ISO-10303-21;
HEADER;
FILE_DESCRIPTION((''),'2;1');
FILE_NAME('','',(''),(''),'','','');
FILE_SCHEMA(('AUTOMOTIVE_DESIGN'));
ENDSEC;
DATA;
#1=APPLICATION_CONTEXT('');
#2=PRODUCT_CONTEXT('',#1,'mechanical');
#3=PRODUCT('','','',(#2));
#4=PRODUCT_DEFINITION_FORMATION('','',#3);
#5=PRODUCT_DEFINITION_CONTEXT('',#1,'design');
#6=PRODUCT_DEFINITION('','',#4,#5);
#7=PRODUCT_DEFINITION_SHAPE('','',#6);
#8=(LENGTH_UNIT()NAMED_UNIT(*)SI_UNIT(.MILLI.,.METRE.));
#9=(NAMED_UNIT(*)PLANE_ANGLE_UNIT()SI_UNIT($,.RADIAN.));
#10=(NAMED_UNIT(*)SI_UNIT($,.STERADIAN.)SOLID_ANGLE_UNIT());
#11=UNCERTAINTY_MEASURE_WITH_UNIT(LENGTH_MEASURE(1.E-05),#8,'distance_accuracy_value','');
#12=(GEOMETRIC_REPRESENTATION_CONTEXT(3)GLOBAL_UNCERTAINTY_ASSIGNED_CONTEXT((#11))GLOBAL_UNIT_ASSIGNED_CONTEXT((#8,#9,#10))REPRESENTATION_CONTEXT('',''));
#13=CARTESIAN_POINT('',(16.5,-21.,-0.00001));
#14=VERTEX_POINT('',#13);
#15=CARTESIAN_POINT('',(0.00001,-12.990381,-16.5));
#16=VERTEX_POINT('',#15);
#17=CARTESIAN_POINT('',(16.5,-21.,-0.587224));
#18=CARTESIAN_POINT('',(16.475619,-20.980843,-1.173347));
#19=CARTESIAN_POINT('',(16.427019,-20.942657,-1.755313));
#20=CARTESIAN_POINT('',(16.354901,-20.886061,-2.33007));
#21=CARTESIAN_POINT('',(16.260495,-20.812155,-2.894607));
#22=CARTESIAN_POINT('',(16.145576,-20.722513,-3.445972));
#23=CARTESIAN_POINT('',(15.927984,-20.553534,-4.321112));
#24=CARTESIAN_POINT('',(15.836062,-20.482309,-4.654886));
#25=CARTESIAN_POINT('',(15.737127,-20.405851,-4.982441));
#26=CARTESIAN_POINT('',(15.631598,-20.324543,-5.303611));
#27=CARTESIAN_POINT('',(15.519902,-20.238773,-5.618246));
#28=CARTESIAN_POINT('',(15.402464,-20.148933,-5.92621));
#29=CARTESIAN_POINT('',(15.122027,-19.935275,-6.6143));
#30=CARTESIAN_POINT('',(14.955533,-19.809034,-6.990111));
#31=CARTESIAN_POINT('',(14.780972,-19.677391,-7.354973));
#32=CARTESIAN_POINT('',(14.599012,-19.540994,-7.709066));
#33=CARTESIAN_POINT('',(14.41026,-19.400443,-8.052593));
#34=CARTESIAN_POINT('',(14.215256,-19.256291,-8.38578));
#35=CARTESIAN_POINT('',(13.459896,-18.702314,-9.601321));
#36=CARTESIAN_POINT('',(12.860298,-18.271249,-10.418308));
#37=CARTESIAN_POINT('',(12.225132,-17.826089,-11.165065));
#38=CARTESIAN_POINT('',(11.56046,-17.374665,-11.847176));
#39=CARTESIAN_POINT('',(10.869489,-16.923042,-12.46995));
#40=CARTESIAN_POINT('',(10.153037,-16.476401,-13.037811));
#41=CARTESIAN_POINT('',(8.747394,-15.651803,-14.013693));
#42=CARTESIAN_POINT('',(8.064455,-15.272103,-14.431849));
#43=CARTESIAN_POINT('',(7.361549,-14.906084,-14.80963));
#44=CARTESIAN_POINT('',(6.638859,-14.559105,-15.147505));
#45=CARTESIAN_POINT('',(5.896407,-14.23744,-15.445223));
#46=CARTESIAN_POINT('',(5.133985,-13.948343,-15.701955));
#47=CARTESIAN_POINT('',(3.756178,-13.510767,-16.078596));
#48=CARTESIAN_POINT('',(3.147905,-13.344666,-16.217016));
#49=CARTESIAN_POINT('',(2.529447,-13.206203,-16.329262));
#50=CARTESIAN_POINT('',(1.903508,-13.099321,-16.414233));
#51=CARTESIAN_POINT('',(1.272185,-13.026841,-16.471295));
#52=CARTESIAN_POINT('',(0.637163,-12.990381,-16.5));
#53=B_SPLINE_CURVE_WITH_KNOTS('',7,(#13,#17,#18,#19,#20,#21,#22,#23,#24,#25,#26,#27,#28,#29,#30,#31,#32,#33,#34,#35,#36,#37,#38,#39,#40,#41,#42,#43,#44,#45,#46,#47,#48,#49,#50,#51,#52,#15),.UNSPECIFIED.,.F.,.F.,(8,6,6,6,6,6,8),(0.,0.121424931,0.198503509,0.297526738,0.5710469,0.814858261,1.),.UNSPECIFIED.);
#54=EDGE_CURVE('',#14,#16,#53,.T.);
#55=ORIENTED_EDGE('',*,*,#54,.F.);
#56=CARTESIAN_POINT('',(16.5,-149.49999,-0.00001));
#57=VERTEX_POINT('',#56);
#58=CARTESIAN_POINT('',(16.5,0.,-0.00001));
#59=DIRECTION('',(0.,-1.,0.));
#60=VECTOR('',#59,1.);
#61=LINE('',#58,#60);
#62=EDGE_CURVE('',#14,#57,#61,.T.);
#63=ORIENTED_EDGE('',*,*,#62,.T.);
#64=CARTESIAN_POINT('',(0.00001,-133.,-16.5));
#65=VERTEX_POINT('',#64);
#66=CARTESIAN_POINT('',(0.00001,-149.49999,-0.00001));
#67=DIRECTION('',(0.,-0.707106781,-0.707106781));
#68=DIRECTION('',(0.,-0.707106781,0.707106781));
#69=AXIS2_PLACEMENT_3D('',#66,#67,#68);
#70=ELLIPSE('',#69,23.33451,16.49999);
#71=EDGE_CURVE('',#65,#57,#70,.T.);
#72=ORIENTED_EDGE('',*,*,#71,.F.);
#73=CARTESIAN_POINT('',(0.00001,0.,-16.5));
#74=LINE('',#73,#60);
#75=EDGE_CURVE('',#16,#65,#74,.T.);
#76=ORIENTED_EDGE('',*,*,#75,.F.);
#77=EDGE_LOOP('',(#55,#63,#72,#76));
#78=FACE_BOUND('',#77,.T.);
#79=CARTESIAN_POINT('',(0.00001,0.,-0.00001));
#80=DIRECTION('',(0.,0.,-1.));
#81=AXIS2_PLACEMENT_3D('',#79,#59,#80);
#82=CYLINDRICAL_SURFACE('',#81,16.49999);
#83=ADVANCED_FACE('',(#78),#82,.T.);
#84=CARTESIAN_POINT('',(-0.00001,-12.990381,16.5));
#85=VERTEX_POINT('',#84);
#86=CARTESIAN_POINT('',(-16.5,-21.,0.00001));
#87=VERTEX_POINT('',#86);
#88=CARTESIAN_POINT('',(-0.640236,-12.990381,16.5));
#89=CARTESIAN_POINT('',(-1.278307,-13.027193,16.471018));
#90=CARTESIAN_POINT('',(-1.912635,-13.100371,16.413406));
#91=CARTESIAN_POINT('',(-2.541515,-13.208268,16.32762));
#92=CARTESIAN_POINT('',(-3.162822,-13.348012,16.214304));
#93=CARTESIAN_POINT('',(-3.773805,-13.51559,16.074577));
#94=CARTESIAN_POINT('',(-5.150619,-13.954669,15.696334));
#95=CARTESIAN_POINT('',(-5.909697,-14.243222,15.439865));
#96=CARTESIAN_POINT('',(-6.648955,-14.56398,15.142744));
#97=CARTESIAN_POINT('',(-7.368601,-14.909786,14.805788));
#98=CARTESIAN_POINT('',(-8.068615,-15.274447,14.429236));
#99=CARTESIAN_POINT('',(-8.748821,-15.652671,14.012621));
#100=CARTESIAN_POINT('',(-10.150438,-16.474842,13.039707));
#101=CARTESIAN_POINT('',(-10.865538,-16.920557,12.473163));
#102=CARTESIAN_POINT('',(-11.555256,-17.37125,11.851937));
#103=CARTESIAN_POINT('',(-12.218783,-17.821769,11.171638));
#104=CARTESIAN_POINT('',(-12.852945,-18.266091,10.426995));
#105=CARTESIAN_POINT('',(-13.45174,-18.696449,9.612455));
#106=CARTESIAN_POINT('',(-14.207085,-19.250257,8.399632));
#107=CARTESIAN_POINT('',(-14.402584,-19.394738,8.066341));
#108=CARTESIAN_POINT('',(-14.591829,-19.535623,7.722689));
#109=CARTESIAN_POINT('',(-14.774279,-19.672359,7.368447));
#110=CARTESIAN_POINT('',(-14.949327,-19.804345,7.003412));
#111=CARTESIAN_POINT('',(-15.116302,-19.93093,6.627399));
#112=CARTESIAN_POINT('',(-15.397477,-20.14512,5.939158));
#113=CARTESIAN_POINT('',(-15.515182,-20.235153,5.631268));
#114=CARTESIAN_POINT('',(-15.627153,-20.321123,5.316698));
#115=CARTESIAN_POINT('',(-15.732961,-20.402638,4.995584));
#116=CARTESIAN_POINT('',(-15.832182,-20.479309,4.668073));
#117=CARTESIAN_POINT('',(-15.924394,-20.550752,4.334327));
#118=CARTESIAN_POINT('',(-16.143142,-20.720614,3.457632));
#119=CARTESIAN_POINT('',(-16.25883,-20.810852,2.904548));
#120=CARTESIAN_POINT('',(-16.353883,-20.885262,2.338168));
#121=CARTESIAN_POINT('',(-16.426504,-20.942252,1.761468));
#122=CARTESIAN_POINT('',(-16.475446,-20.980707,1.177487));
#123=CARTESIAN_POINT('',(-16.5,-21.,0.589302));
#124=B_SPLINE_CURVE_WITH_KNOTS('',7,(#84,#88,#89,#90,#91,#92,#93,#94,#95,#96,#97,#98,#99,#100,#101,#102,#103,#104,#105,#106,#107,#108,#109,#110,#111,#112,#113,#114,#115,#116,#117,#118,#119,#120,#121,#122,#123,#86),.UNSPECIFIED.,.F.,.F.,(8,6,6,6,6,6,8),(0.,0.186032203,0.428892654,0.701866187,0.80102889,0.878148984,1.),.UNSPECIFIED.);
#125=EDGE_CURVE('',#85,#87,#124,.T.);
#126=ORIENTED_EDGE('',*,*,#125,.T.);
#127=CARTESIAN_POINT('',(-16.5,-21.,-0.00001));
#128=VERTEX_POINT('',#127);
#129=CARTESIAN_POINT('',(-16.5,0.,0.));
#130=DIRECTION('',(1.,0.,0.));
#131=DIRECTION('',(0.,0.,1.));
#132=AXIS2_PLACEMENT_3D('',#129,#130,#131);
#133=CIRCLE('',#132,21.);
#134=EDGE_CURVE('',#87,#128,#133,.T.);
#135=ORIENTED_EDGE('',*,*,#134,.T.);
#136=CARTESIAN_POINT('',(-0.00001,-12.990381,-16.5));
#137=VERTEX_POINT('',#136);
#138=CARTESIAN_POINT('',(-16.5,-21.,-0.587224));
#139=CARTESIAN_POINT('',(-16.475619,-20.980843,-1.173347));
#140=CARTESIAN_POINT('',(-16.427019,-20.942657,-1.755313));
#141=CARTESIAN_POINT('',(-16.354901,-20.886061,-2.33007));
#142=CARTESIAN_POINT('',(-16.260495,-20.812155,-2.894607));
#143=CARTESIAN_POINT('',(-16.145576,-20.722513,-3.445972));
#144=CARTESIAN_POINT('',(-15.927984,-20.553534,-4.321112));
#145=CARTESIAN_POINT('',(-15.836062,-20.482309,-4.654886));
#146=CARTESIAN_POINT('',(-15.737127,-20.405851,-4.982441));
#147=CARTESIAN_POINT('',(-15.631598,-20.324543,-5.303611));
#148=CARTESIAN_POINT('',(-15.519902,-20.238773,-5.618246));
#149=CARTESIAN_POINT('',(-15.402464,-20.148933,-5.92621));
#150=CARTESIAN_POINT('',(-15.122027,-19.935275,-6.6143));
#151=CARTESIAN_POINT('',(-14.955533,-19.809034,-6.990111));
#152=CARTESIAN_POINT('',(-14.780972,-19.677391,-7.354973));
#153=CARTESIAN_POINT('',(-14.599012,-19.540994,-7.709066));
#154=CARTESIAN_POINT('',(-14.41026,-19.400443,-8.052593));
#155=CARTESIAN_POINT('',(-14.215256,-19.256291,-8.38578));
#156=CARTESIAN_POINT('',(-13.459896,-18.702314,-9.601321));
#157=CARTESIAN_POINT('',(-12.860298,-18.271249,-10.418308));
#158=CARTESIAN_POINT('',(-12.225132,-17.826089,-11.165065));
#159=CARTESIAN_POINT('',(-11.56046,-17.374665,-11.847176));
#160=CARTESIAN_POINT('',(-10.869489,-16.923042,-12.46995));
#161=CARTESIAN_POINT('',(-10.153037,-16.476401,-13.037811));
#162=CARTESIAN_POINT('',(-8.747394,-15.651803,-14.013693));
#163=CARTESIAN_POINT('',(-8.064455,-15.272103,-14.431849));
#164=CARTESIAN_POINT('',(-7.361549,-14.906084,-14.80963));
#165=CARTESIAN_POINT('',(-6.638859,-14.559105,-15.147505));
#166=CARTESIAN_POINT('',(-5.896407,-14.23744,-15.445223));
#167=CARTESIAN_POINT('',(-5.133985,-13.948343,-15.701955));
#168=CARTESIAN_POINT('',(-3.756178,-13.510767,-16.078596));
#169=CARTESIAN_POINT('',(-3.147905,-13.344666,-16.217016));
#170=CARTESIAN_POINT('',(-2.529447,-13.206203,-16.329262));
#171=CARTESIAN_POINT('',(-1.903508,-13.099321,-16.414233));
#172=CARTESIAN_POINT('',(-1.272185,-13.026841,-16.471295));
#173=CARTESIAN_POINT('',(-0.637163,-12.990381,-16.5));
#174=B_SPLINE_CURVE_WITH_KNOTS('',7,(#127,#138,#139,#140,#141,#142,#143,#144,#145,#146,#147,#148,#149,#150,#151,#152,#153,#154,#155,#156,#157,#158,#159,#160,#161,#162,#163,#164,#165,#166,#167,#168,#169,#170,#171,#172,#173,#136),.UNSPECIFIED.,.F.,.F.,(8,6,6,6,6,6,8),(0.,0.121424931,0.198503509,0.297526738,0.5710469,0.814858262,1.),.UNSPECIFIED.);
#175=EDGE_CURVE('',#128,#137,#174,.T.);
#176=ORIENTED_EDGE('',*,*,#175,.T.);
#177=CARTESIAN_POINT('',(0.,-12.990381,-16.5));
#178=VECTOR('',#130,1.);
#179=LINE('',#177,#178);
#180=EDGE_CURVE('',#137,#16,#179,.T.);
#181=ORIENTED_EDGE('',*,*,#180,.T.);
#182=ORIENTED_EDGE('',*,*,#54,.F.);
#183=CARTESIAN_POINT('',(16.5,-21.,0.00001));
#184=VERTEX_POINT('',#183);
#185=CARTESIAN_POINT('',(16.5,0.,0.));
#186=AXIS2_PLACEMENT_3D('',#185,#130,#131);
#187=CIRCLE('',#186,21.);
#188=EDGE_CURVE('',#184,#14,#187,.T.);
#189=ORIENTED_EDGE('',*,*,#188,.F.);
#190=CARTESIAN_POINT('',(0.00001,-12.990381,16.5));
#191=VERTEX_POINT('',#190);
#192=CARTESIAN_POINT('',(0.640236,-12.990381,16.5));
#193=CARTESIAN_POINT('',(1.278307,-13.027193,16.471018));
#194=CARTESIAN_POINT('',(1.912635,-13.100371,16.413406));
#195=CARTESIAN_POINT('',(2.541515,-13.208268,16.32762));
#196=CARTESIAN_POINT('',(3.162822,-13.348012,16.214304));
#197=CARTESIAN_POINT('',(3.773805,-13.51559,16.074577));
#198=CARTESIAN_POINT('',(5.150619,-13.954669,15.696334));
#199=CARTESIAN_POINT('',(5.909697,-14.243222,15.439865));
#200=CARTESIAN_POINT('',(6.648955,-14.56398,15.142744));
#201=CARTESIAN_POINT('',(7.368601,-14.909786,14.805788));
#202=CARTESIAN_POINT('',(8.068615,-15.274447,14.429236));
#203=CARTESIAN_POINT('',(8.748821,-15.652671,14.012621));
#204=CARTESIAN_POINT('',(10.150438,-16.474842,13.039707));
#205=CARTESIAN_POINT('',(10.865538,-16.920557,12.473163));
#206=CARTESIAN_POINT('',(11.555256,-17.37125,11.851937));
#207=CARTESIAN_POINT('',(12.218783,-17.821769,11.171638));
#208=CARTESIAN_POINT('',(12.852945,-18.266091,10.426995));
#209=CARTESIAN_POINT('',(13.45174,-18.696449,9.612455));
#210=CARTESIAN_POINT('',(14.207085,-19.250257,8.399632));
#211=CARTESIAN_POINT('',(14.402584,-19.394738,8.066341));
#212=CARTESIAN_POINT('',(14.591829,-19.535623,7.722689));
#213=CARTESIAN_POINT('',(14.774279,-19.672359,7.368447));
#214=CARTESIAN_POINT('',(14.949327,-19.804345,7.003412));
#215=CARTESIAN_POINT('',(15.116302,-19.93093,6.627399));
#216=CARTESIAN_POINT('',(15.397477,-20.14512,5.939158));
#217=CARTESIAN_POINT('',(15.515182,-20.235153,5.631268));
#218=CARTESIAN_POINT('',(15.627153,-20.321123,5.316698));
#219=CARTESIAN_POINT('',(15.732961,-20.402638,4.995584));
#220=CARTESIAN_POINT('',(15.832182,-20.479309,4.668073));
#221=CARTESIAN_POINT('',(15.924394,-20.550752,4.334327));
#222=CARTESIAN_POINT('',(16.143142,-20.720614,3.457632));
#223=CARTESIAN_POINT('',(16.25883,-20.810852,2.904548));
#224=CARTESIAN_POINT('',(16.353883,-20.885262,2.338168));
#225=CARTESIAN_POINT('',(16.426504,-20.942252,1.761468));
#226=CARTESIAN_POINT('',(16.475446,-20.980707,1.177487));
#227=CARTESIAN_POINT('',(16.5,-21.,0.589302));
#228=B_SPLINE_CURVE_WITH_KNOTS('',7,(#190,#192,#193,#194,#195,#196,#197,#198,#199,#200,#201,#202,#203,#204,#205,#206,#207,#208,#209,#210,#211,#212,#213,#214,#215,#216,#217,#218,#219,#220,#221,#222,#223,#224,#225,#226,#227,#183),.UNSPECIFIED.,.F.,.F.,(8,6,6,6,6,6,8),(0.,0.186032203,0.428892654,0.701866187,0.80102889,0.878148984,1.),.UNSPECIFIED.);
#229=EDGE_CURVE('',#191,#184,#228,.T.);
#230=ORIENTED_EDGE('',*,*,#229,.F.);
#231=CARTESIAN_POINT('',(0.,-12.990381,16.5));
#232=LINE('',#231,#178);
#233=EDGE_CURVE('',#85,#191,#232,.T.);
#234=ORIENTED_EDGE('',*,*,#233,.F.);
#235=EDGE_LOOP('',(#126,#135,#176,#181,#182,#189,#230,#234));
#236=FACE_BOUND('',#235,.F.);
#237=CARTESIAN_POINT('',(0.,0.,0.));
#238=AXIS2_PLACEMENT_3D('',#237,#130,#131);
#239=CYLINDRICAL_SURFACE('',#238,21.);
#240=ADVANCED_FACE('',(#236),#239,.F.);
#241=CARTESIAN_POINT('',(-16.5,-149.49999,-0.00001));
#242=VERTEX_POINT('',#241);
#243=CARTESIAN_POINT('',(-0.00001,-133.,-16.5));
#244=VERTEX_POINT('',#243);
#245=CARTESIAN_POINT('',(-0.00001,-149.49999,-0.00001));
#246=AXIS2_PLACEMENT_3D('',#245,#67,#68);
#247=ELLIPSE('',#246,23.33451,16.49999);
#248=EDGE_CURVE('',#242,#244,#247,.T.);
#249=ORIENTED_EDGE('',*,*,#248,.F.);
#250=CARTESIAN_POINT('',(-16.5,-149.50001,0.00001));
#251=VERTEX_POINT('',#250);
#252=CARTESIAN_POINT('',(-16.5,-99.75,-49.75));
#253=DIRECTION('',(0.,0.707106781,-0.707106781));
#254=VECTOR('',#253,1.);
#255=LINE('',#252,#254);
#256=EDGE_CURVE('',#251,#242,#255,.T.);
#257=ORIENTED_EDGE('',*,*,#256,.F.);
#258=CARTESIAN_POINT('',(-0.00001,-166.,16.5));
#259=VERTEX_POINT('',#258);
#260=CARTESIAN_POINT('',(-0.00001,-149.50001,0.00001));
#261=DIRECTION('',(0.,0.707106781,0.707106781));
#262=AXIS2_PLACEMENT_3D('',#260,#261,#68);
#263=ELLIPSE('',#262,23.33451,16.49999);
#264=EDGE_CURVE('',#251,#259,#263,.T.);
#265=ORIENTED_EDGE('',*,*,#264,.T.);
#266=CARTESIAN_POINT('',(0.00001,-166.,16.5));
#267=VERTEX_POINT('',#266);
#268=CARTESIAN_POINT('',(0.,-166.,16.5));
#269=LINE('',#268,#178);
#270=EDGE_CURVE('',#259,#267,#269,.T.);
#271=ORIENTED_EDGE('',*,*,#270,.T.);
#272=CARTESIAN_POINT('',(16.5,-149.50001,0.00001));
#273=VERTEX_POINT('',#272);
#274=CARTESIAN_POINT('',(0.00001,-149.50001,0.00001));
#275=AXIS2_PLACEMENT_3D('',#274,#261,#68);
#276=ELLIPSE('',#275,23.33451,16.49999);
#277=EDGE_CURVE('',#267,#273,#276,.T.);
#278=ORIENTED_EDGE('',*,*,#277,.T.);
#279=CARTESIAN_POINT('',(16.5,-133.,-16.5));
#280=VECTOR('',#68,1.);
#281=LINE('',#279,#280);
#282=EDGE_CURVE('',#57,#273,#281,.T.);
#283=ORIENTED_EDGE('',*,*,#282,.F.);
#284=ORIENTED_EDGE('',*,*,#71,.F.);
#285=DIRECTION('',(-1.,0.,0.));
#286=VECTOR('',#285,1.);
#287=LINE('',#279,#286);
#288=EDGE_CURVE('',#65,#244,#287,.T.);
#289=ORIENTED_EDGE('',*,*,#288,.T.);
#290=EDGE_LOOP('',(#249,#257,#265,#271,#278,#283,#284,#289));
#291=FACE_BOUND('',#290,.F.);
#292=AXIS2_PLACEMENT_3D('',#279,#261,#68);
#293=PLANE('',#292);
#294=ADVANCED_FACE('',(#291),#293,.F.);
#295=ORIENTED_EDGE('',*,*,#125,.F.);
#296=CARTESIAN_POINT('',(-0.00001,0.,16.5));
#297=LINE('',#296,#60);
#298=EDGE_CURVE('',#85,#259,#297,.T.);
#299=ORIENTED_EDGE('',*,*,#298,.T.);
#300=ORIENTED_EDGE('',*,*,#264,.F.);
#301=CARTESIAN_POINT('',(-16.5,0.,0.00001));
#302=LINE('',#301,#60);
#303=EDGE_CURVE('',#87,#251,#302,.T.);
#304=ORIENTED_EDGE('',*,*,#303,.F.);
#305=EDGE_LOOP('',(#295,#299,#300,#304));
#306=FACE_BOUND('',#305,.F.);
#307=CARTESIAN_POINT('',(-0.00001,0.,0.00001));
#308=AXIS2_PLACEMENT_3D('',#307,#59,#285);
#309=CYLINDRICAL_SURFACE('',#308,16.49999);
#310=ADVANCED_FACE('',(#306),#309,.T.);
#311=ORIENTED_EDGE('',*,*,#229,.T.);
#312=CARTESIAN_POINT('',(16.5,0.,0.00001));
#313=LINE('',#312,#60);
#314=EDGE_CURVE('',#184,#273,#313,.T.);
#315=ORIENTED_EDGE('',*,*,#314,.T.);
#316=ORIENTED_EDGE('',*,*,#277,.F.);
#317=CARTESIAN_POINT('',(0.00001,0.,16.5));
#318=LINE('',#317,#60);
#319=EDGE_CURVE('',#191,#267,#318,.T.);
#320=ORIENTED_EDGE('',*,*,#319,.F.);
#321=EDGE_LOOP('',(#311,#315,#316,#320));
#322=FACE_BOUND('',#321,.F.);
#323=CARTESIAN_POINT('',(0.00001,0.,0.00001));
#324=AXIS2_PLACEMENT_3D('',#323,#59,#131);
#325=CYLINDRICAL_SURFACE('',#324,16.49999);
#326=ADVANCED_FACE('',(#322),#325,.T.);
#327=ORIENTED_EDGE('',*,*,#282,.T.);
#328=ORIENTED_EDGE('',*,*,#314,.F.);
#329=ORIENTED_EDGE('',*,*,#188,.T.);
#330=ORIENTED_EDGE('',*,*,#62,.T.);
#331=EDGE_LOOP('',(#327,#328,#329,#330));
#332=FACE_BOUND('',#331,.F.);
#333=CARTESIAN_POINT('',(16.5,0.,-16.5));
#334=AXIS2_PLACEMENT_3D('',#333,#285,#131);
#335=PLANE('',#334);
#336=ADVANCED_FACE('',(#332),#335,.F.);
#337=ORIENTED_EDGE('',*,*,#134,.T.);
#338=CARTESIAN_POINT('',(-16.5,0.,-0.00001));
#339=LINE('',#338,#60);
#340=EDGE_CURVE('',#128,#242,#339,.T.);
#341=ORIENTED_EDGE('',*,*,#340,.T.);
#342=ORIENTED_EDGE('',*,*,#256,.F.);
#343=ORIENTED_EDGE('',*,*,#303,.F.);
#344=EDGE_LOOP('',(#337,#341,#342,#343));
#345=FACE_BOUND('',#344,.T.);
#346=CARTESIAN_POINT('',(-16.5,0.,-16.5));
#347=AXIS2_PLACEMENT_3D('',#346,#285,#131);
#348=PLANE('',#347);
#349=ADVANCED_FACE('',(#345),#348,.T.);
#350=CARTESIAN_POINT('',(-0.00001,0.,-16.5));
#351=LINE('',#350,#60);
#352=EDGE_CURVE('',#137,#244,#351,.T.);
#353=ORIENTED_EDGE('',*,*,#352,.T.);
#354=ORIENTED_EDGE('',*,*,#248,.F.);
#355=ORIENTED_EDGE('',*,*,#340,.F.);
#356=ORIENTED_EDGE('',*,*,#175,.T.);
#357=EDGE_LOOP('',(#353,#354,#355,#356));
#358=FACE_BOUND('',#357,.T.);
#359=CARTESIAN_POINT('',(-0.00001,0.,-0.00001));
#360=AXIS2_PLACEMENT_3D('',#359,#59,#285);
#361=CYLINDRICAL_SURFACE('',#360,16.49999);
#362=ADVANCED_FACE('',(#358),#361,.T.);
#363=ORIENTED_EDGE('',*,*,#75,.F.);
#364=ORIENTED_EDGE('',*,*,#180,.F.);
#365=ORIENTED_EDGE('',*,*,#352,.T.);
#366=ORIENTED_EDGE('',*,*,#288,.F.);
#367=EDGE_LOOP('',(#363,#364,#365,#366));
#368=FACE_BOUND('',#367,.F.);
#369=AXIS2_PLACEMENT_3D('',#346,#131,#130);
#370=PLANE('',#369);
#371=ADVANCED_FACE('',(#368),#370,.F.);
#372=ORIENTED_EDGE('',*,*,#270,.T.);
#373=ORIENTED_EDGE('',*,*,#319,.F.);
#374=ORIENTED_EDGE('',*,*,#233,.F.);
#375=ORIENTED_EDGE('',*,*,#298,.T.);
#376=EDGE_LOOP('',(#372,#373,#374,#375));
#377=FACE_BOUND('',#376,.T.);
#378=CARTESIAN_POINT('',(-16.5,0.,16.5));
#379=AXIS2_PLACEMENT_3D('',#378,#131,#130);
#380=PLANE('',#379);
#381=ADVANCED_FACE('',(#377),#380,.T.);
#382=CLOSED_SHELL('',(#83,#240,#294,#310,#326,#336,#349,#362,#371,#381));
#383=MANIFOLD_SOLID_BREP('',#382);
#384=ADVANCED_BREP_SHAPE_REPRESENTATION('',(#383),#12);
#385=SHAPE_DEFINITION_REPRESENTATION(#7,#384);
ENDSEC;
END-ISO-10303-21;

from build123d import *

# Parameters (mm, degrees)
F0_W     = 33
F0_H     = 33
F1_DEPTH = 166
F3_DEPTH = 100
F4_R     = 16.49999
F6_DEPTH = 50


# Not quite as in the source:
# - a fillet or chamfer is up to 0.001 mm smaller than in the source, because OpenCascade refuses the exact size


with BuildPart() as f1:
    # F0 (on Front) → F1 (new body)
    with BuildSketch(Plane.XZ):
        Rectangle(F0_W, F0_H)
    extrude(amount=F1_DEPTH)

    # F2 (on face) → F3 (cut)
    with BuildSketch(Plane.YZ.offset(16.5)):
        Polygon((-133, -16.5), (-166, 16.5), (-166, -16.5), align=None)
    extrude(amount=-F3_DEPTH, mode=Mode.SUBTRACT)

    # F4 (radius 16.5 in the source; OpenCascade refuses exactly that, so slightly less here)
    f4_edges = [f1.edges().sort_by_distance(p)[0] for p in [
        (-16.5, -83, 16.5),
        (-16.5, -66.5, -16.5),
        (16.5, -83, 16.5),
        (16.5, -66.5, -16.5),
    ]]
    fillet(f4_edges, radius=F4_R)

    # F5 (on Right) → F6 (cut, symmetric)
    with BuildSketch(Plane.YZ):
        with BuildLine():
            Line((0, -21), (0, 0))
            Line((0, 0), (0, 21))
            ThreePointArc((0, 21), (-21, 0), (0, -21))
        make_face()
    extrude(amount=F6_DEPTH, both=True, mode=Mode.SUBTRACT)


solid = f1.part
